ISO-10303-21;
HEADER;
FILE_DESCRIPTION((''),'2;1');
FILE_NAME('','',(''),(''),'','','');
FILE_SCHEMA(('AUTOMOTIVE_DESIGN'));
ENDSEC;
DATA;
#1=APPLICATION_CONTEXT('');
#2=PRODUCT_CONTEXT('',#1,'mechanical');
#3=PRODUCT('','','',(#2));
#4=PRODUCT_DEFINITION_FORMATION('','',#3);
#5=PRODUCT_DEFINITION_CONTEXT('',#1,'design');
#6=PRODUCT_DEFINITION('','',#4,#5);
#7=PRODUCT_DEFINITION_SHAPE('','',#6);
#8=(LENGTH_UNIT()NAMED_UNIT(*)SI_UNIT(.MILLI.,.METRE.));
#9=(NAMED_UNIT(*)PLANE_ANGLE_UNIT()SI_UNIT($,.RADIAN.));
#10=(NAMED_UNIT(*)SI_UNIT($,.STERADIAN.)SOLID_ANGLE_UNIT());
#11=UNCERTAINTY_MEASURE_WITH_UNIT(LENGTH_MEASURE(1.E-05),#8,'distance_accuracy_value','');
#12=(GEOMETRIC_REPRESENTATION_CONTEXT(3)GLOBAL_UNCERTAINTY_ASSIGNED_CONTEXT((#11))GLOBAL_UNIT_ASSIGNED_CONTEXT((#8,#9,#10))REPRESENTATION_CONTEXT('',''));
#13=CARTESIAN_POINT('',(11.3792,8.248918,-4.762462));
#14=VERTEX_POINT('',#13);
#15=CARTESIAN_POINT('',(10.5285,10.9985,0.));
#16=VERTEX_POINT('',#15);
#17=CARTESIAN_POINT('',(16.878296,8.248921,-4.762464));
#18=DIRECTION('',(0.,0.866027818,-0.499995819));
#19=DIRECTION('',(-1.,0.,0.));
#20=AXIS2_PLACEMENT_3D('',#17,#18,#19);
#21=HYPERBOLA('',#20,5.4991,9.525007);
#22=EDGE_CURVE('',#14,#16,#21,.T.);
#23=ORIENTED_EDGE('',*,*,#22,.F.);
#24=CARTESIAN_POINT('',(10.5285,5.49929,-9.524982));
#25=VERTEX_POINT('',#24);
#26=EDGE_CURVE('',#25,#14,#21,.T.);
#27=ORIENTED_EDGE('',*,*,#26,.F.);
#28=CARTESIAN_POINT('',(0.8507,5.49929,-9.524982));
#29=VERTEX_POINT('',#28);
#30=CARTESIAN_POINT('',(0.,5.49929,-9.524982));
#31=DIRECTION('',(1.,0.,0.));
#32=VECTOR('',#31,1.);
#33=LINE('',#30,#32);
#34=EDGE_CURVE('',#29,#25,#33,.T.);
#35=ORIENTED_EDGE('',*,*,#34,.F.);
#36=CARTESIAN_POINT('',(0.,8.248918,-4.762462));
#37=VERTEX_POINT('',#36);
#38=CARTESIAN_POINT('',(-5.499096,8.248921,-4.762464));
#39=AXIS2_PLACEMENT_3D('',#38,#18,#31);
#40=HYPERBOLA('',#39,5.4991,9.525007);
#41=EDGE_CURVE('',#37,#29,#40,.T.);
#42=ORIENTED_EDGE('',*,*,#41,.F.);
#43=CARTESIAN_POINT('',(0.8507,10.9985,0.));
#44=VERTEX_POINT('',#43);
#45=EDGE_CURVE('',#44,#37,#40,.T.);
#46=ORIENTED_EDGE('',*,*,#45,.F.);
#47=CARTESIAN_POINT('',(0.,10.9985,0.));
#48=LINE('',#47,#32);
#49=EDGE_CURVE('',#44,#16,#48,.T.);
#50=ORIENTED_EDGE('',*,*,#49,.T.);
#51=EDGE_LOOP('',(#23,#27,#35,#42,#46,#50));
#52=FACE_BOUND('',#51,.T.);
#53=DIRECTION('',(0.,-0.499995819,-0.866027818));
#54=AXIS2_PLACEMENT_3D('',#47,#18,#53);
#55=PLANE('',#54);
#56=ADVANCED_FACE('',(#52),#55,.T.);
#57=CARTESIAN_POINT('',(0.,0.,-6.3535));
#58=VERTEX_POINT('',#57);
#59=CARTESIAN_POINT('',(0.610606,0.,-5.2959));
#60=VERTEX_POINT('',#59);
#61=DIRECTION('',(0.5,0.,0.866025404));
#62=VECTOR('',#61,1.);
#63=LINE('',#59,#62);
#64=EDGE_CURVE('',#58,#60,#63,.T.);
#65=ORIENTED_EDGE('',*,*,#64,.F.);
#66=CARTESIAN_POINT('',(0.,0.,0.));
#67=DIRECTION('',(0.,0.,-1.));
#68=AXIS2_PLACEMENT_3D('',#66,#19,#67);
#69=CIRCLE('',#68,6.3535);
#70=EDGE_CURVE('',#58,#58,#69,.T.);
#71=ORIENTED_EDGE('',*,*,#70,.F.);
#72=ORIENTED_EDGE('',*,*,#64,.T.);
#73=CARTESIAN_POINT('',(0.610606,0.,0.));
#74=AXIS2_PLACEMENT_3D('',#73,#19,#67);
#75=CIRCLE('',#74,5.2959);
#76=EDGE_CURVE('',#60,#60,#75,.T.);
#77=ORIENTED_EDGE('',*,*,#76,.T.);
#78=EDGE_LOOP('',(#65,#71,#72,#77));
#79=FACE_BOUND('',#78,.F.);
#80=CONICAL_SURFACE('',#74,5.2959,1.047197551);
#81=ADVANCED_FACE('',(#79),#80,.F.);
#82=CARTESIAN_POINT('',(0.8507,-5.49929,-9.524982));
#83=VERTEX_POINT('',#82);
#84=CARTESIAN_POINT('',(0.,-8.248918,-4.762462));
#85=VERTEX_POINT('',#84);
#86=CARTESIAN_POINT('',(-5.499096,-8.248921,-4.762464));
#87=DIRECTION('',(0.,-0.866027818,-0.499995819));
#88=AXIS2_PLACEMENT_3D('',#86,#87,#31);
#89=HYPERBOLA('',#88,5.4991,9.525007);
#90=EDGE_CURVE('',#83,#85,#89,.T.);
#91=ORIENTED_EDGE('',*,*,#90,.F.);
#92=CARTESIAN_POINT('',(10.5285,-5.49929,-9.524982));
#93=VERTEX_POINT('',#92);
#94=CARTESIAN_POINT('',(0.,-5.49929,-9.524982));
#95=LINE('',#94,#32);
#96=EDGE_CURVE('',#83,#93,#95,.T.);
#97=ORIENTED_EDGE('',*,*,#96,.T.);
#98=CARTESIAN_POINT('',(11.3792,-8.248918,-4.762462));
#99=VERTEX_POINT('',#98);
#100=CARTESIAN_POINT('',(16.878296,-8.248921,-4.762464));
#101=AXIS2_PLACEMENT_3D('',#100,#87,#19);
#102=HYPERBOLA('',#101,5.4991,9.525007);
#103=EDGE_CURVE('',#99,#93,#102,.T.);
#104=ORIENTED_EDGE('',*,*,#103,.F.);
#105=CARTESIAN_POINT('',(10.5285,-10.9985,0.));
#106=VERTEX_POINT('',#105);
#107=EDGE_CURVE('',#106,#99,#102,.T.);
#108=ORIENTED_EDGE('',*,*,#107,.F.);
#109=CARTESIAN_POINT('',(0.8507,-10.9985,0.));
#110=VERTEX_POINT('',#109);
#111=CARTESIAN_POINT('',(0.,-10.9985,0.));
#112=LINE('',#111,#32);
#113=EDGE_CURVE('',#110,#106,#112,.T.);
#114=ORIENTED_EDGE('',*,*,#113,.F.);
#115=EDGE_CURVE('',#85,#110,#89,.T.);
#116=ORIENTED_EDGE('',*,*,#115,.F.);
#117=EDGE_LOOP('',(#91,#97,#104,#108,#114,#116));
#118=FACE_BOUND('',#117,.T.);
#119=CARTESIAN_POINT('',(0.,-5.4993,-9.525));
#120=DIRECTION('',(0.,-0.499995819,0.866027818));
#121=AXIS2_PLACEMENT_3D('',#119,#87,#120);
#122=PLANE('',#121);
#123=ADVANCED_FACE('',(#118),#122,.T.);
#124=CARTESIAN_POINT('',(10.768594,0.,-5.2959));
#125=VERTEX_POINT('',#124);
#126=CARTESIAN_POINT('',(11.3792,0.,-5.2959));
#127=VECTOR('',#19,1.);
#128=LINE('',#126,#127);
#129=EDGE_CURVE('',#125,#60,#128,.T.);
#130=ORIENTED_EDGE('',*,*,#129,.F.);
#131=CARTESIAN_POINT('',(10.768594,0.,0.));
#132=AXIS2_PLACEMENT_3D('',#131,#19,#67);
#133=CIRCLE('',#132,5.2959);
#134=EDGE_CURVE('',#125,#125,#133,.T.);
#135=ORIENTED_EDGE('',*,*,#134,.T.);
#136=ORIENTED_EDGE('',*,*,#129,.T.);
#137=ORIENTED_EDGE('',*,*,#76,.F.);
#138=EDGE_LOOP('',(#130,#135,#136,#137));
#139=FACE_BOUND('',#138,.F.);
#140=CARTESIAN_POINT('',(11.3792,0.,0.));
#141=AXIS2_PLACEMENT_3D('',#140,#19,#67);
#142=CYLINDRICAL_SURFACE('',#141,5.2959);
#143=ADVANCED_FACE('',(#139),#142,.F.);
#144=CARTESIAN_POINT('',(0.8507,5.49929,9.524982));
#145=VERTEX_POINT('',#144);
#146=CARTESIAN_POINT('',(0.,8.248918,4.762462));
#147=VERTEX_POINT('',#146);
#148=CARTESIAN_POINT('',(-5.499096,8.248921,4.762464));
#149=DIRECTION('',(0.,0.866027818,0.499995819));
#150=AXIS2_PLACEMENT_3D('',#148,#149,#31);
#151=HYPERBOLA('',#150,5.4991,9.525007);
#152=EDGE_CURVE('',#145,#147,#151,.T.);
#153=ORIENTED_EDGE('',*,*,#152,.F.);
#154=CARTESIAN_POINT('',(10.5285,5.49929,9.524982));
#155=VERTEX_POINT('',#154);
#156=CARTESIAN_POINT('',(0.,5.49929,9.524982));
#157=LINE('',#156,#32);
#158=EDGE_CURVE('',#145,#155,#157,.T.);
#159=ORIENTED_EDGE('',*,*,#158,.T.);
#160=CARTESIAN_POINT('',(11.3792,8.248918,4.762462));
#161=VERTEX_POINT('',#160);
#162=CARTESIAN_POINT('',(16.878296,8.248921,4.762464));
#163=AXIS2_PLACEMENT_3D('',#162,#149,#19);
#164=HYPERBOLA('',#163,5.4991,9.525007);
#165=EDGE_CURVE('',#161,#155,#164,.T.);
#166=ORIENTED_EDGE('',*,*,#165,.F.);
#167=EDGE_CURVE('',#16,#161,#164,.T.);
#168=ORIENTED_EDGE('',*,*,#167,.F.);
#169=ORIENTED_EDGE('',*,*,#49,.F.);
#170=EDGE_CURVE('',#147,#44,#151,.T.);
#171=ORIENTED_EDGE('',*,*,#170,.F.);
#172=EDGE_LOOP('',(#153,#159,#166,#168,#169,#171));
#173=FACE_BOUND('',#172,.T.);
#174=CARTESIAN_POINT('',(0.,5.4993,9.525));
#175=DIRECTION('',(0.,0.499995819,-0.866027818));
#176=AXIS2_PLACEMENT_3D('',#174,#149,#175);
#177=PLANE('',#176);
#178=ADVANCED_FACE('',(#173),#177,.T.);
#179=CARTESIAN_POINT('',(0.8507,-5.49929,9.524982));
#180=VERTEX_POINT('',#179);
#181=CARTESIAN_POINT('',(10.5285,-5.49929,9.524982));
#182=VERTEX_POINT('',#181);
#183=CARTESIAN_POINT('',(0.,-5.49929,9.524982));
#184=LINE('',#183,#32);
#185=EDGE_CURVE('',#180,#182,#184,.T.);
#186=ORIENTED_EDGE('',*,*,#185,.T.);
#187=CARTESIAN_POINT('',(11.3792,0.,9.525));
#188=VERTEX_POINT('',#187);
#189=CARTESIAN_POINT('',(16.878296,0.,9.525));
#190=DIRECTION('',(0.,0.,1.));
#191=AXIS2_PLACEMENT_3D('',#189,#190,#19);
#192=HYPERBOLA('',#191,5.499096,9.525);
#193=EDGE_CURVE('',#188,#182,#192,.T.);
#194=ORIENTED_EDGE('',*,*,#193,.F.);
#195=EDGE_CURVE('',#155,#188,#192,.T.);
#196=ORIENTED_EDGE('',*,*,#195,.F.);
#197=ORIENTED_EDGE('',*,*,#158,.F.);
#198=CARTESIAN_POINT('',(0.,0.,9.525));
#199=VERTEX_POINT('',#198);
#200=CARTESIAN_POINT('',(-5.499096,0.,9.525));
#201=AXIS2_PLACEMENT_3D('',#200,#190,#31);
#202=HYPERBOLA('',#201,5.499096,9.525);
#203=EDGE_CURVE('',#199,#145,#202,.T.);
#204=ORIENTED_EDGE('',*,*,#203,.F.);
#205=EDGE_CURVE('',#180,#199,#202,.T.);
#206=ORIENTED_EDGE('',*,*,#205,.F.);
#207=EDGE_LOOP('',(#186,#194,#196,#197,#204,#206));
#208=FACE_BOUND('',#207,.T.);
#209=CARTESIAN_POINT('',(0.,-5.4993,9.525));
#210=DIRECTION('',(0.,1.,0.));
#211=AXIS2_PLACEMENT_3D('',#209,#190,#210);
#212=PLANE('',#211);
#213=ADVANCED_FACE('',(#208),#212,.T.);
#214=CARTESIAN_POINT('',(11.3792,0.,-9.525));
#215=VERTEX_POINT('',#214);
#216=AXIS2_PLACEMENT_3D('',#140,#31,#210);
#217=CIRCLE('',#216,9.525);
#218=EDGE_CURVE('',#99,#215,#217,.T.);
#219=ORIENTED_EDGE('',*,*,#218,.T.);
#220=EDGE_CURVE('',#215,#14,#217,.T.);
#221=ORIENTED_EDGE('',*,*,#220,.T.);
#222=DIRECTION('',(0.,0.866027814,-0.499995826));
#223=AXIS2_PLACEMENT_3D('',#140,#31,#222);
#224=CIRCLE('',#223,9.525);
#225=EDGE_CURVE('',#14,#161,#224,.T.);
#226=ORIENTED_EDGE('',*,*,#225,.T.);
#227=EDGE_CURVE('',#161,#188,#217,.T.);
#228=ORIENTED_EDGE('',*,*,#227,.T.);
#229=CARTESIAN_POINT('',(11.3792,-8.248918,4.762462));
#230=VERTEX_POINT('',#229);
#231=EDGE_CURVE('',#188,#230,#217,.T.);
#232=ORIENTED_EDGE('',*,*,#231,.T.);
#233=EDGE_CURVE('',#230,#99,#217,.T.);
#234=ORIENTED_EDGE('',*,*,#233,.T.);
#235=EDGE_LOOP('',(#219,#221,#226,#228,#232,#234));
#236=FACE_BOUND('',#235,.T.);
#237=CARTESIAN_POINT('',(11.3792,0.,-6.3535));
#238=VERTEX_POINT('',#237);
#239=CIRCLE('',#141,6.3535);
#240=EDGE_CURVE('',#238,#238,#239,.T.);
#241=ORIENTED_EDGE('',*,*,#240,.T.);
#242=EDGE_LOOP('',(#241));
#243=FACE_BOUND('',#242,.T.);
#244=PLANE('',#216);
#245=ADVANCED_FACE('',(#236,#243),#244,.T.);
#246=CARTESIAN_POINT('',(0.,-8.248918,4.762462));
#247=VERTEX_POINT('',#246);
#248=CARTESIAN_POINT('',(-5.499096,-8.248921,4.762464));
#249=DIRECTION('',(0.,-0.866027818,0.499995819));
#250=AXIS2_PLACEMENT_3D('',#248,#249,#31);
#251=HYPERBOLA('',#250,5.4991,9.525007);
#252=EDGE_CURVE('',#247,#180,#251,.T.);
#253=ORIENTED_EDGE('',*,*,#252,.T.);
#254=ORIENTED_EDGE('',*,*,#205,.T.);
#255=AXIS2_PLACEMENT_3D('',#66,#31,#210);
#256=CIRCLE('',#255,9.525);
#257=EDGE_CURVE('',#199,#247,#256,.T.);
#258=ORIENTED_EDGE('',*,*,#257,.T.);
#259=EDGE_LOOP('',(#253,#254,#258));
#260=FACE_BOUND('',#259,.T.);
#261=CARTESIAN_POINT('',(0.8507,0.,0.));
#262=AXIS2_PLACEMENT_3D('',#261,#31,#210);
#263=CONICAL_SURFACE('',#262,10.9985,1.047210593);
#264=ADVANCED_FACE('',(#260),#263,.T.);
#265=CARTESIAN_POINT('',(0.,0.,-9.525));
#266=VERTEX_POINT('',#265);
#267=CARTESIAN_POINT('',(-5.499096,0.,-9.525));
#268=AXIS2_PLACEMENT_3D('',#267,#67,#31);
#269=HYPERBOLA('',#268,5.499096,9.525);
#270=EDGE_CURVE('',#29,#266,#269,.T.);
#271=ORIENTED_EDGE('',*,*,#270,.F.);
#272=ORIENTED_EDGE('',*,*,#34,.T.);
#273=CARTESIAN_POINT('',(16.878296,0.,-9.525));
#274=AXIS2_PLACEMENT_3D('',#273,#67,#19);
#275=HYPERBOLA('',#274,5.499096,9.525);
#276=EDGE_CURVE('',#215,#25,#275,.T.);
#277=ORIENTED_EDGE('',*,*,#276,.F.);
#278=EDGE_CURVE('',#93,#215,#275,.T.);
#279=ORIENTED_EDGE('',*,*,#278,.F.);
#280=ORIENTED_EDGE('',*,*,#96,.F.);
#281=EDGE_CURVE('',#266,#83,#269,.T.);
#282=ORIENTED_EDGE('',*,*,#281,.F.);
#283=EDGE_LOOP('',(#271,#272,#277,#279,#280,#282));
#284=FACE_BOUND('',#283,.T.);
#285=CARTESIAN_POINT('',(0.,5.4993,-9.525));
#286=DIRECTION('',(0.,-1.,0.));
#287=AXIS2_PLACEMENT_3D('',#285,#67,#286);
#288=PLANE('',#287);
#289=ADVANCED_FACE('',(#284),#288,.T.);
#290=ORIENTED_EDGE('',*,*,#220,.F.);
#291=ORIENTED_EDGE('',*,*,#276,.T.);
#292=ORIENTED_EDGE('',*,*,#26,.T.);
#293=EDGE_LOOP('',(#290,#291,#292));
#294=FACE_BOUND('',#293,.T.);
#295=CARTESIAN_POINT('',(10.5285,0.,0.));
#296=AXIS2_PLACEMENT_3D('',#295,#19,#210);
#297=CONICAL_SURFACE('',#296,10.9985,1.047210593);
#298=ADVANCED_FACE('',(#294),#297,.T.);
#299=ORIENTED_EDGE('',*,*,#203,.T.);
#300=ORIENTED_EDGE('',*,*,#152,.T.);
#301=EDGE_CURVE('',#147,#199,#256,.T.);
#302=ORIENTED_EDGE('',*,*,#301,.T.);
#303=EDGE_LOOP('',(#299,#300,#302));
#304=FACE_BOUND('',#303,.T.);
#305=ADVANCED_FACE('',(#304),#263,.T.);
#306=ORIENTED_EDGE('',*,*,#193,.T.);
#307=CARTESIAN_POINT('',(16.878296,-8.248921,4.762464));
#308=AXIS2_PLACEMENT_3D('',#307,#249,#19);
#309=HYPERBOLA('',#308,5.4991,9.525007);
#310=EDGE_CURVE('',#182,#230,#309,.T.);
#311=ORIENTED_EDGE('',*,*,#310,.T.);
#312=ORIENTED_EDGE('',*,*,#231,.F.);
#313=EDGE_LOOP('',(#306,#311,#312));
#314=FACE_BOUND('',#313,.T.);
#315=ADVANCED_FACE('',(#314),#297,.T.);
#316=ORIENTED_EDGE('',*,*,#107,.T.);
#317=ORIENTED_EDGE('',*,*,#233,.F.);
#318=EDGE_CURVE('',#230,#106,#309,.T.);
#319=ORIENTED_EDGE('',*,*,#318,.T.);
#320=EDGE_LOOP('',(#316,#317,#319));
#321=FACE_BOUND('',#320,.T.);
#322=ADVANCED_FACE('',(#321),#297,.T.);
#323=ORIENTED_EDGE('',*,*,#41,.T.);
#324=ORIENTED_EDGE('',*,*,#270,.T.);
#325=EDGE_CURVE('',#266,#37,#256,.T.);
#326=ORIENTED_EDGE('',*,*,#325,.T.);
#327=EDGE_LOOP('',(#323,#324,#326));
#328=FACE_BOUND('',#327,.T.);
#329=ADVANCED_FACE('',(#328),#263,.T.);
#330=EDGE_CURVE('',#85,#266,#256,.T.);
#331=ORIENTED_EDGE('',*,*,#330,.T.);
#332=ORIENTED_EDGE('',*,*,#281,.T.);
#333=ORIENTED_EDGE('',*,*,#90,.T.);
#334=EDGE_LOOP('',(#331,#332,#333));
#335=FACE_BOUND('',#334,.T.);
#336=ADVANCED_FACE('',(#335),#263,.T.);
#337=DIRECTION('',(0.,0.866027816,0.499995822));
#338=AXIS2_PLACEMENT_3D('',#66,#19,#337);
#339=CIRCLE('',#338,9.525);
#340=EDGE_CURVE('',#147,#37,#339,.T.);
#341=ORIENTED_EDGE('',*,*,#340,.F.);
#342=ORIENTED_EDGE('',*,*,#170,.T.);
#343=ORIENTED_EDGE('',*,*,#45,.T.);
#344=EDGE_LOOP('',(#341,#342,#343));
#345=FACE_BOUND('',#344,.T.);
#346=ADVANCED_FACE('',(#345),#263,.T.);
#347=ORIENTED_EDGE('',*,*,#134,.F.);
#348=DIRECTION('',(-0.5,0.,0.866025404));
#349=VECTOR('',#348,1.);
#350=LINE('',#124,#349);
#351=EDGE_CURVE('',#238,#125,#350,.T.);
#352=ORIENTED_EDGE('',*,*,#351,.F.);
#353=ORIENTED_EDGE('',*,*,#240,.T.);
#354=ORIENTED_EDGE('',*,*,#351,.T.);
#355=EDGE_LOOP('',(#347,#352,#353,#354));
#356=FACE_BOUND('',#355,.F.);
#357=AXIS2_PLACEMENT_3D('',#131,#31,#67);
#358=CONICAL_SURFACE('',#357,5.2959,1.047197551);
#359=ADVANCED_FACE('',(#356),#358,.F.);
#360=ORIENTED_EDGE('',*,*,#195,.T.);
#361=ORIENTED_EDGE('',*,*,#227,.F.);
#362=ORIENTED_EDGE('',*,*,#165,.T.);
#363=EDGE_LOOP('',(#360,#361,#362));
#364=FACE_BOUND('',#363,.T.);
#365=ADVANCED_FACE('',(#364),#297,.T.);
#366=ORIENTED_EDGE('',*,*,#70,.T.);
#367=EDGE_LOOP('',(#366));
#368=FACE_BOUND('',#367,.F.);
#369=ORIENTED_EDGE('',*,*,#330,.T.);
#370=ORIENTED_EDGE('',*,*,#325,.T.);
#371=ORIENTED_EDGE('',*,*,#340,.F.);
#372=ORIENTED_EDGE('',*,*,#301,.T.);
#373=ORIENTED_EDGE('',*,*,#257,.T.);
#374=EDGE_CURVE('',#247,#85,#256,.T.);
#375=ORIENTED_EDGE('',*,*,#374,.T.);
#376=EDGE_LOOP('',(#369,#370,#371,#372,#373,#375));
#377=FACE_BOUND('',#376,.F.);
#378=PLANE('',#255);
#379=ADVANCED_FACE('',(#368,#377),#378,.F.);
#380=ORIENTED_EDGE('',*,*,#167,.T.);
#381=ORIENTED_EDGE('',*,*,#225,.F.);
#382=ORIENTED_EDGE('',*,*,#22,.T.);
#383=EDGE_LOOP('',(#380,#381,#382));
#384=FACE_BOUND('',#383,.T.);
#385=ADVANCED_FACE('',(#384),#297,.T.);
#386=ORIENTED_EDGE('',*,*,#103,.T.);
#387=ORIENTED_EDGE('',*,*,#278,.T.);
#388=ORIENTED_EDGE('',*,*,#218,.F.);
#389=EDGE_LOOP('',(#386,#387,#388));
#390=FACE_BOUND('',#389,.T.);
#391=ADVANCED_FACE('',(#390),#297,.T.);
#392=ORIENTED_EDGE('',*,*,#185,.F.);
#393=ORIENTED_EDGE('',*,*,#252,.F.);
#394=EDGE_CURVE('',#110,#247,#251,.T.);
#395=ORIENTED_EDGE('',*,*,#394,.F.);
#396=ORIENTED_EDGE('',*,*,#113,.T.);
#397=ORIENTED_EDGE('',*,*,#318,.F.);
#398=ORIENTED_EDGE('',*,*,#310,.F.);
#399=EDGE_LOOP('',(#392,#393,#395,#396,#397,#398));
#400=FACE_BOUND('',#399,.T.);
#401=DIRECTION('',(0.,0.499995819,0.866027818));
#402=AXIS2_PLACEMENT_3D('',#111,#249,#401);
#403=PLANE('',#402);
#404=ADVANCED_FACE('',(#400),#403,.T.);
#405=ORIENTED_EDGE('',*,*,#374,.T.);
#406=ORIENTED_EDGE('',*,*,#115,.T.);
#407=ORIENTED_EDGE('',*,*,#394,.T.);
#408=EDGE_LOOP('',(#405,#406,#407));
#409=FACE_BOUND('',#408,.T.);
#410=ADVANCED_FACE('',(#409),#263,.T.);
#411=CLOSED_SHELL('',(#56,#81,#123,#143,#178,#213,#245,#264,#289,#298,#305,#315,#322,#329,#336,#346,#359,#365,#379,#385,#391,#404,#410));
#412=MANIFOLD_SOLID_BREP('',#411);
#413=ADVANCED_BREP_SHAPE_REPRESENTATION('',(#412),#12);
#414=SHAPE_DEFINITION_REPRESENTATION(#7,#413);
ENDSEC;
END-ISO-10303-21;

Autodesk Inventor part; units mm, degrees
ref_plane "YZ Plane" through (0, 0, 0) normal (1, 0, 0) x (0, 1, 0)
ref_plane "XZ Plane" through (0, 0, 0) normal (0, 1, 0) x (-1, 0, 0)
sketch "Sketch1" plane through (0, 0, 0) normal (1, 0, 0) x (0, 1, 0)
  line L0 (-10.9985, 0) -> (-5.4993, 9.525)
  line L1 (-5.4993, 9.525) -> (5.4993, 9.525)
  line L2 (5.4993, 9.525) -> (10.9985, 0)
  line L3 (10.9985, 0) -> (5.4993, -9.525)
  line L4 (5.4993, -9.525) -> (-5.4993, -9.525)
  line L5 (-5.4993, -9.525) -> (-10.9985, 0)
  point P0 (0, 0)
  point P1 (0, 0)
  dimension "d0" = 21.9971
extrude "Body" add sketch "Sketch1" along normal blind 11.3792
sketch "Sketch2" plane through (0, 0, 0) normal (0, 0, 1) x (1, 0, 0)
  line L0 (0, 5.4993) -> (0, 10.9985) projected
  line L1 (0, 10.9985) -> (11.3792, 10.9985) projected
  line L2 (11.3792, 5.4993) -> (11.3792, 10.9985) projected
  line L3 (-2.2758, 0) -> (13.655, 0) projected
  line L4 (0.8507, 10.9985) -> (0, 9.525)
  line L5 (10.5285, 10.9985) -> (11.3792, 9.525)
  dimension "d3" = 30
  dimension "d4" = 30
  dimension "d5" = 19.05
  dimension "d6" = 19.05
revolve "Chamfer1" cut sketch "Sketch2" angle 360 about axis through (-10, 0, 0) along (1, 0, 0)
sketch "Sketch3" plane through (11.3792, 0, 0) normal (1, 0, 0) x (0, 0, -1)
  arc A0 (-4.7625, -8.2489) -> (4.7625, -8.2489) centre (0, 0) ccw projected
hole "Thread" at (11.3792, 0, 0) direction (-1, 0, 0) diameter 10.5918 end through all thread size "1/2-13 UNC" class "2B" standard "ANSI Unified Screw Threads"
chamfer "Chamfer2" distance 1.0576 angle 30 1 edges at (11.3792, 0, 5.2959) measured on face at (11.3792, -8.0676, -0.2128)
chamfer "Chamfer3" distance 1.0576 angle 30 1 edges at (0, 0, 5.2959) measured on face at (0, -8.0676, -0.2128)
ref_plane "Work Plane1" through (-19.8659, 0, 0) normal (0, -0.8660254, -0.5) x (1, 0, 0)
equation "\"d0\" = 1.1547 * SW"
equation "\"d1\" = KOH"
equation "\"d3\" = ANG1"
equation "\"d4\" = ANG2"
equation "\"d5\" = SW0"
equation "\"d6\" = SW01"
equation "\"d8\" = -0.5 * GD1 + 0.5 * NND"
equation "\"d40\" = -0.5 * GD1 + 0.5 * NND"
equation "\"d10\" = -0.5 * GD1 + 0.5 * NND"
equation "\"d41\" = -0.5 * GD1 + 0.5 * NND"
equation "\"ANG1\" = 30deg"
equation "\"ANG2\" = 30deg"
equation "\"NND\" = 12.7"
equation "\"KOH\" = 11.3792"
equation "\"SW\" = 19.05"
equation "\"SW0\" = SW"
equation "\"SW01\" = SW"
equation "\"THREADDIA\" = 12.7"
equation "\"TOA\" = 30deg"
equation "\"E0\" = 1.155 * SW"
equation "\"GD1\" = 10.584899"
properties part number "AS 2465 - 1/2  UNC" material "Steel, Mild"
